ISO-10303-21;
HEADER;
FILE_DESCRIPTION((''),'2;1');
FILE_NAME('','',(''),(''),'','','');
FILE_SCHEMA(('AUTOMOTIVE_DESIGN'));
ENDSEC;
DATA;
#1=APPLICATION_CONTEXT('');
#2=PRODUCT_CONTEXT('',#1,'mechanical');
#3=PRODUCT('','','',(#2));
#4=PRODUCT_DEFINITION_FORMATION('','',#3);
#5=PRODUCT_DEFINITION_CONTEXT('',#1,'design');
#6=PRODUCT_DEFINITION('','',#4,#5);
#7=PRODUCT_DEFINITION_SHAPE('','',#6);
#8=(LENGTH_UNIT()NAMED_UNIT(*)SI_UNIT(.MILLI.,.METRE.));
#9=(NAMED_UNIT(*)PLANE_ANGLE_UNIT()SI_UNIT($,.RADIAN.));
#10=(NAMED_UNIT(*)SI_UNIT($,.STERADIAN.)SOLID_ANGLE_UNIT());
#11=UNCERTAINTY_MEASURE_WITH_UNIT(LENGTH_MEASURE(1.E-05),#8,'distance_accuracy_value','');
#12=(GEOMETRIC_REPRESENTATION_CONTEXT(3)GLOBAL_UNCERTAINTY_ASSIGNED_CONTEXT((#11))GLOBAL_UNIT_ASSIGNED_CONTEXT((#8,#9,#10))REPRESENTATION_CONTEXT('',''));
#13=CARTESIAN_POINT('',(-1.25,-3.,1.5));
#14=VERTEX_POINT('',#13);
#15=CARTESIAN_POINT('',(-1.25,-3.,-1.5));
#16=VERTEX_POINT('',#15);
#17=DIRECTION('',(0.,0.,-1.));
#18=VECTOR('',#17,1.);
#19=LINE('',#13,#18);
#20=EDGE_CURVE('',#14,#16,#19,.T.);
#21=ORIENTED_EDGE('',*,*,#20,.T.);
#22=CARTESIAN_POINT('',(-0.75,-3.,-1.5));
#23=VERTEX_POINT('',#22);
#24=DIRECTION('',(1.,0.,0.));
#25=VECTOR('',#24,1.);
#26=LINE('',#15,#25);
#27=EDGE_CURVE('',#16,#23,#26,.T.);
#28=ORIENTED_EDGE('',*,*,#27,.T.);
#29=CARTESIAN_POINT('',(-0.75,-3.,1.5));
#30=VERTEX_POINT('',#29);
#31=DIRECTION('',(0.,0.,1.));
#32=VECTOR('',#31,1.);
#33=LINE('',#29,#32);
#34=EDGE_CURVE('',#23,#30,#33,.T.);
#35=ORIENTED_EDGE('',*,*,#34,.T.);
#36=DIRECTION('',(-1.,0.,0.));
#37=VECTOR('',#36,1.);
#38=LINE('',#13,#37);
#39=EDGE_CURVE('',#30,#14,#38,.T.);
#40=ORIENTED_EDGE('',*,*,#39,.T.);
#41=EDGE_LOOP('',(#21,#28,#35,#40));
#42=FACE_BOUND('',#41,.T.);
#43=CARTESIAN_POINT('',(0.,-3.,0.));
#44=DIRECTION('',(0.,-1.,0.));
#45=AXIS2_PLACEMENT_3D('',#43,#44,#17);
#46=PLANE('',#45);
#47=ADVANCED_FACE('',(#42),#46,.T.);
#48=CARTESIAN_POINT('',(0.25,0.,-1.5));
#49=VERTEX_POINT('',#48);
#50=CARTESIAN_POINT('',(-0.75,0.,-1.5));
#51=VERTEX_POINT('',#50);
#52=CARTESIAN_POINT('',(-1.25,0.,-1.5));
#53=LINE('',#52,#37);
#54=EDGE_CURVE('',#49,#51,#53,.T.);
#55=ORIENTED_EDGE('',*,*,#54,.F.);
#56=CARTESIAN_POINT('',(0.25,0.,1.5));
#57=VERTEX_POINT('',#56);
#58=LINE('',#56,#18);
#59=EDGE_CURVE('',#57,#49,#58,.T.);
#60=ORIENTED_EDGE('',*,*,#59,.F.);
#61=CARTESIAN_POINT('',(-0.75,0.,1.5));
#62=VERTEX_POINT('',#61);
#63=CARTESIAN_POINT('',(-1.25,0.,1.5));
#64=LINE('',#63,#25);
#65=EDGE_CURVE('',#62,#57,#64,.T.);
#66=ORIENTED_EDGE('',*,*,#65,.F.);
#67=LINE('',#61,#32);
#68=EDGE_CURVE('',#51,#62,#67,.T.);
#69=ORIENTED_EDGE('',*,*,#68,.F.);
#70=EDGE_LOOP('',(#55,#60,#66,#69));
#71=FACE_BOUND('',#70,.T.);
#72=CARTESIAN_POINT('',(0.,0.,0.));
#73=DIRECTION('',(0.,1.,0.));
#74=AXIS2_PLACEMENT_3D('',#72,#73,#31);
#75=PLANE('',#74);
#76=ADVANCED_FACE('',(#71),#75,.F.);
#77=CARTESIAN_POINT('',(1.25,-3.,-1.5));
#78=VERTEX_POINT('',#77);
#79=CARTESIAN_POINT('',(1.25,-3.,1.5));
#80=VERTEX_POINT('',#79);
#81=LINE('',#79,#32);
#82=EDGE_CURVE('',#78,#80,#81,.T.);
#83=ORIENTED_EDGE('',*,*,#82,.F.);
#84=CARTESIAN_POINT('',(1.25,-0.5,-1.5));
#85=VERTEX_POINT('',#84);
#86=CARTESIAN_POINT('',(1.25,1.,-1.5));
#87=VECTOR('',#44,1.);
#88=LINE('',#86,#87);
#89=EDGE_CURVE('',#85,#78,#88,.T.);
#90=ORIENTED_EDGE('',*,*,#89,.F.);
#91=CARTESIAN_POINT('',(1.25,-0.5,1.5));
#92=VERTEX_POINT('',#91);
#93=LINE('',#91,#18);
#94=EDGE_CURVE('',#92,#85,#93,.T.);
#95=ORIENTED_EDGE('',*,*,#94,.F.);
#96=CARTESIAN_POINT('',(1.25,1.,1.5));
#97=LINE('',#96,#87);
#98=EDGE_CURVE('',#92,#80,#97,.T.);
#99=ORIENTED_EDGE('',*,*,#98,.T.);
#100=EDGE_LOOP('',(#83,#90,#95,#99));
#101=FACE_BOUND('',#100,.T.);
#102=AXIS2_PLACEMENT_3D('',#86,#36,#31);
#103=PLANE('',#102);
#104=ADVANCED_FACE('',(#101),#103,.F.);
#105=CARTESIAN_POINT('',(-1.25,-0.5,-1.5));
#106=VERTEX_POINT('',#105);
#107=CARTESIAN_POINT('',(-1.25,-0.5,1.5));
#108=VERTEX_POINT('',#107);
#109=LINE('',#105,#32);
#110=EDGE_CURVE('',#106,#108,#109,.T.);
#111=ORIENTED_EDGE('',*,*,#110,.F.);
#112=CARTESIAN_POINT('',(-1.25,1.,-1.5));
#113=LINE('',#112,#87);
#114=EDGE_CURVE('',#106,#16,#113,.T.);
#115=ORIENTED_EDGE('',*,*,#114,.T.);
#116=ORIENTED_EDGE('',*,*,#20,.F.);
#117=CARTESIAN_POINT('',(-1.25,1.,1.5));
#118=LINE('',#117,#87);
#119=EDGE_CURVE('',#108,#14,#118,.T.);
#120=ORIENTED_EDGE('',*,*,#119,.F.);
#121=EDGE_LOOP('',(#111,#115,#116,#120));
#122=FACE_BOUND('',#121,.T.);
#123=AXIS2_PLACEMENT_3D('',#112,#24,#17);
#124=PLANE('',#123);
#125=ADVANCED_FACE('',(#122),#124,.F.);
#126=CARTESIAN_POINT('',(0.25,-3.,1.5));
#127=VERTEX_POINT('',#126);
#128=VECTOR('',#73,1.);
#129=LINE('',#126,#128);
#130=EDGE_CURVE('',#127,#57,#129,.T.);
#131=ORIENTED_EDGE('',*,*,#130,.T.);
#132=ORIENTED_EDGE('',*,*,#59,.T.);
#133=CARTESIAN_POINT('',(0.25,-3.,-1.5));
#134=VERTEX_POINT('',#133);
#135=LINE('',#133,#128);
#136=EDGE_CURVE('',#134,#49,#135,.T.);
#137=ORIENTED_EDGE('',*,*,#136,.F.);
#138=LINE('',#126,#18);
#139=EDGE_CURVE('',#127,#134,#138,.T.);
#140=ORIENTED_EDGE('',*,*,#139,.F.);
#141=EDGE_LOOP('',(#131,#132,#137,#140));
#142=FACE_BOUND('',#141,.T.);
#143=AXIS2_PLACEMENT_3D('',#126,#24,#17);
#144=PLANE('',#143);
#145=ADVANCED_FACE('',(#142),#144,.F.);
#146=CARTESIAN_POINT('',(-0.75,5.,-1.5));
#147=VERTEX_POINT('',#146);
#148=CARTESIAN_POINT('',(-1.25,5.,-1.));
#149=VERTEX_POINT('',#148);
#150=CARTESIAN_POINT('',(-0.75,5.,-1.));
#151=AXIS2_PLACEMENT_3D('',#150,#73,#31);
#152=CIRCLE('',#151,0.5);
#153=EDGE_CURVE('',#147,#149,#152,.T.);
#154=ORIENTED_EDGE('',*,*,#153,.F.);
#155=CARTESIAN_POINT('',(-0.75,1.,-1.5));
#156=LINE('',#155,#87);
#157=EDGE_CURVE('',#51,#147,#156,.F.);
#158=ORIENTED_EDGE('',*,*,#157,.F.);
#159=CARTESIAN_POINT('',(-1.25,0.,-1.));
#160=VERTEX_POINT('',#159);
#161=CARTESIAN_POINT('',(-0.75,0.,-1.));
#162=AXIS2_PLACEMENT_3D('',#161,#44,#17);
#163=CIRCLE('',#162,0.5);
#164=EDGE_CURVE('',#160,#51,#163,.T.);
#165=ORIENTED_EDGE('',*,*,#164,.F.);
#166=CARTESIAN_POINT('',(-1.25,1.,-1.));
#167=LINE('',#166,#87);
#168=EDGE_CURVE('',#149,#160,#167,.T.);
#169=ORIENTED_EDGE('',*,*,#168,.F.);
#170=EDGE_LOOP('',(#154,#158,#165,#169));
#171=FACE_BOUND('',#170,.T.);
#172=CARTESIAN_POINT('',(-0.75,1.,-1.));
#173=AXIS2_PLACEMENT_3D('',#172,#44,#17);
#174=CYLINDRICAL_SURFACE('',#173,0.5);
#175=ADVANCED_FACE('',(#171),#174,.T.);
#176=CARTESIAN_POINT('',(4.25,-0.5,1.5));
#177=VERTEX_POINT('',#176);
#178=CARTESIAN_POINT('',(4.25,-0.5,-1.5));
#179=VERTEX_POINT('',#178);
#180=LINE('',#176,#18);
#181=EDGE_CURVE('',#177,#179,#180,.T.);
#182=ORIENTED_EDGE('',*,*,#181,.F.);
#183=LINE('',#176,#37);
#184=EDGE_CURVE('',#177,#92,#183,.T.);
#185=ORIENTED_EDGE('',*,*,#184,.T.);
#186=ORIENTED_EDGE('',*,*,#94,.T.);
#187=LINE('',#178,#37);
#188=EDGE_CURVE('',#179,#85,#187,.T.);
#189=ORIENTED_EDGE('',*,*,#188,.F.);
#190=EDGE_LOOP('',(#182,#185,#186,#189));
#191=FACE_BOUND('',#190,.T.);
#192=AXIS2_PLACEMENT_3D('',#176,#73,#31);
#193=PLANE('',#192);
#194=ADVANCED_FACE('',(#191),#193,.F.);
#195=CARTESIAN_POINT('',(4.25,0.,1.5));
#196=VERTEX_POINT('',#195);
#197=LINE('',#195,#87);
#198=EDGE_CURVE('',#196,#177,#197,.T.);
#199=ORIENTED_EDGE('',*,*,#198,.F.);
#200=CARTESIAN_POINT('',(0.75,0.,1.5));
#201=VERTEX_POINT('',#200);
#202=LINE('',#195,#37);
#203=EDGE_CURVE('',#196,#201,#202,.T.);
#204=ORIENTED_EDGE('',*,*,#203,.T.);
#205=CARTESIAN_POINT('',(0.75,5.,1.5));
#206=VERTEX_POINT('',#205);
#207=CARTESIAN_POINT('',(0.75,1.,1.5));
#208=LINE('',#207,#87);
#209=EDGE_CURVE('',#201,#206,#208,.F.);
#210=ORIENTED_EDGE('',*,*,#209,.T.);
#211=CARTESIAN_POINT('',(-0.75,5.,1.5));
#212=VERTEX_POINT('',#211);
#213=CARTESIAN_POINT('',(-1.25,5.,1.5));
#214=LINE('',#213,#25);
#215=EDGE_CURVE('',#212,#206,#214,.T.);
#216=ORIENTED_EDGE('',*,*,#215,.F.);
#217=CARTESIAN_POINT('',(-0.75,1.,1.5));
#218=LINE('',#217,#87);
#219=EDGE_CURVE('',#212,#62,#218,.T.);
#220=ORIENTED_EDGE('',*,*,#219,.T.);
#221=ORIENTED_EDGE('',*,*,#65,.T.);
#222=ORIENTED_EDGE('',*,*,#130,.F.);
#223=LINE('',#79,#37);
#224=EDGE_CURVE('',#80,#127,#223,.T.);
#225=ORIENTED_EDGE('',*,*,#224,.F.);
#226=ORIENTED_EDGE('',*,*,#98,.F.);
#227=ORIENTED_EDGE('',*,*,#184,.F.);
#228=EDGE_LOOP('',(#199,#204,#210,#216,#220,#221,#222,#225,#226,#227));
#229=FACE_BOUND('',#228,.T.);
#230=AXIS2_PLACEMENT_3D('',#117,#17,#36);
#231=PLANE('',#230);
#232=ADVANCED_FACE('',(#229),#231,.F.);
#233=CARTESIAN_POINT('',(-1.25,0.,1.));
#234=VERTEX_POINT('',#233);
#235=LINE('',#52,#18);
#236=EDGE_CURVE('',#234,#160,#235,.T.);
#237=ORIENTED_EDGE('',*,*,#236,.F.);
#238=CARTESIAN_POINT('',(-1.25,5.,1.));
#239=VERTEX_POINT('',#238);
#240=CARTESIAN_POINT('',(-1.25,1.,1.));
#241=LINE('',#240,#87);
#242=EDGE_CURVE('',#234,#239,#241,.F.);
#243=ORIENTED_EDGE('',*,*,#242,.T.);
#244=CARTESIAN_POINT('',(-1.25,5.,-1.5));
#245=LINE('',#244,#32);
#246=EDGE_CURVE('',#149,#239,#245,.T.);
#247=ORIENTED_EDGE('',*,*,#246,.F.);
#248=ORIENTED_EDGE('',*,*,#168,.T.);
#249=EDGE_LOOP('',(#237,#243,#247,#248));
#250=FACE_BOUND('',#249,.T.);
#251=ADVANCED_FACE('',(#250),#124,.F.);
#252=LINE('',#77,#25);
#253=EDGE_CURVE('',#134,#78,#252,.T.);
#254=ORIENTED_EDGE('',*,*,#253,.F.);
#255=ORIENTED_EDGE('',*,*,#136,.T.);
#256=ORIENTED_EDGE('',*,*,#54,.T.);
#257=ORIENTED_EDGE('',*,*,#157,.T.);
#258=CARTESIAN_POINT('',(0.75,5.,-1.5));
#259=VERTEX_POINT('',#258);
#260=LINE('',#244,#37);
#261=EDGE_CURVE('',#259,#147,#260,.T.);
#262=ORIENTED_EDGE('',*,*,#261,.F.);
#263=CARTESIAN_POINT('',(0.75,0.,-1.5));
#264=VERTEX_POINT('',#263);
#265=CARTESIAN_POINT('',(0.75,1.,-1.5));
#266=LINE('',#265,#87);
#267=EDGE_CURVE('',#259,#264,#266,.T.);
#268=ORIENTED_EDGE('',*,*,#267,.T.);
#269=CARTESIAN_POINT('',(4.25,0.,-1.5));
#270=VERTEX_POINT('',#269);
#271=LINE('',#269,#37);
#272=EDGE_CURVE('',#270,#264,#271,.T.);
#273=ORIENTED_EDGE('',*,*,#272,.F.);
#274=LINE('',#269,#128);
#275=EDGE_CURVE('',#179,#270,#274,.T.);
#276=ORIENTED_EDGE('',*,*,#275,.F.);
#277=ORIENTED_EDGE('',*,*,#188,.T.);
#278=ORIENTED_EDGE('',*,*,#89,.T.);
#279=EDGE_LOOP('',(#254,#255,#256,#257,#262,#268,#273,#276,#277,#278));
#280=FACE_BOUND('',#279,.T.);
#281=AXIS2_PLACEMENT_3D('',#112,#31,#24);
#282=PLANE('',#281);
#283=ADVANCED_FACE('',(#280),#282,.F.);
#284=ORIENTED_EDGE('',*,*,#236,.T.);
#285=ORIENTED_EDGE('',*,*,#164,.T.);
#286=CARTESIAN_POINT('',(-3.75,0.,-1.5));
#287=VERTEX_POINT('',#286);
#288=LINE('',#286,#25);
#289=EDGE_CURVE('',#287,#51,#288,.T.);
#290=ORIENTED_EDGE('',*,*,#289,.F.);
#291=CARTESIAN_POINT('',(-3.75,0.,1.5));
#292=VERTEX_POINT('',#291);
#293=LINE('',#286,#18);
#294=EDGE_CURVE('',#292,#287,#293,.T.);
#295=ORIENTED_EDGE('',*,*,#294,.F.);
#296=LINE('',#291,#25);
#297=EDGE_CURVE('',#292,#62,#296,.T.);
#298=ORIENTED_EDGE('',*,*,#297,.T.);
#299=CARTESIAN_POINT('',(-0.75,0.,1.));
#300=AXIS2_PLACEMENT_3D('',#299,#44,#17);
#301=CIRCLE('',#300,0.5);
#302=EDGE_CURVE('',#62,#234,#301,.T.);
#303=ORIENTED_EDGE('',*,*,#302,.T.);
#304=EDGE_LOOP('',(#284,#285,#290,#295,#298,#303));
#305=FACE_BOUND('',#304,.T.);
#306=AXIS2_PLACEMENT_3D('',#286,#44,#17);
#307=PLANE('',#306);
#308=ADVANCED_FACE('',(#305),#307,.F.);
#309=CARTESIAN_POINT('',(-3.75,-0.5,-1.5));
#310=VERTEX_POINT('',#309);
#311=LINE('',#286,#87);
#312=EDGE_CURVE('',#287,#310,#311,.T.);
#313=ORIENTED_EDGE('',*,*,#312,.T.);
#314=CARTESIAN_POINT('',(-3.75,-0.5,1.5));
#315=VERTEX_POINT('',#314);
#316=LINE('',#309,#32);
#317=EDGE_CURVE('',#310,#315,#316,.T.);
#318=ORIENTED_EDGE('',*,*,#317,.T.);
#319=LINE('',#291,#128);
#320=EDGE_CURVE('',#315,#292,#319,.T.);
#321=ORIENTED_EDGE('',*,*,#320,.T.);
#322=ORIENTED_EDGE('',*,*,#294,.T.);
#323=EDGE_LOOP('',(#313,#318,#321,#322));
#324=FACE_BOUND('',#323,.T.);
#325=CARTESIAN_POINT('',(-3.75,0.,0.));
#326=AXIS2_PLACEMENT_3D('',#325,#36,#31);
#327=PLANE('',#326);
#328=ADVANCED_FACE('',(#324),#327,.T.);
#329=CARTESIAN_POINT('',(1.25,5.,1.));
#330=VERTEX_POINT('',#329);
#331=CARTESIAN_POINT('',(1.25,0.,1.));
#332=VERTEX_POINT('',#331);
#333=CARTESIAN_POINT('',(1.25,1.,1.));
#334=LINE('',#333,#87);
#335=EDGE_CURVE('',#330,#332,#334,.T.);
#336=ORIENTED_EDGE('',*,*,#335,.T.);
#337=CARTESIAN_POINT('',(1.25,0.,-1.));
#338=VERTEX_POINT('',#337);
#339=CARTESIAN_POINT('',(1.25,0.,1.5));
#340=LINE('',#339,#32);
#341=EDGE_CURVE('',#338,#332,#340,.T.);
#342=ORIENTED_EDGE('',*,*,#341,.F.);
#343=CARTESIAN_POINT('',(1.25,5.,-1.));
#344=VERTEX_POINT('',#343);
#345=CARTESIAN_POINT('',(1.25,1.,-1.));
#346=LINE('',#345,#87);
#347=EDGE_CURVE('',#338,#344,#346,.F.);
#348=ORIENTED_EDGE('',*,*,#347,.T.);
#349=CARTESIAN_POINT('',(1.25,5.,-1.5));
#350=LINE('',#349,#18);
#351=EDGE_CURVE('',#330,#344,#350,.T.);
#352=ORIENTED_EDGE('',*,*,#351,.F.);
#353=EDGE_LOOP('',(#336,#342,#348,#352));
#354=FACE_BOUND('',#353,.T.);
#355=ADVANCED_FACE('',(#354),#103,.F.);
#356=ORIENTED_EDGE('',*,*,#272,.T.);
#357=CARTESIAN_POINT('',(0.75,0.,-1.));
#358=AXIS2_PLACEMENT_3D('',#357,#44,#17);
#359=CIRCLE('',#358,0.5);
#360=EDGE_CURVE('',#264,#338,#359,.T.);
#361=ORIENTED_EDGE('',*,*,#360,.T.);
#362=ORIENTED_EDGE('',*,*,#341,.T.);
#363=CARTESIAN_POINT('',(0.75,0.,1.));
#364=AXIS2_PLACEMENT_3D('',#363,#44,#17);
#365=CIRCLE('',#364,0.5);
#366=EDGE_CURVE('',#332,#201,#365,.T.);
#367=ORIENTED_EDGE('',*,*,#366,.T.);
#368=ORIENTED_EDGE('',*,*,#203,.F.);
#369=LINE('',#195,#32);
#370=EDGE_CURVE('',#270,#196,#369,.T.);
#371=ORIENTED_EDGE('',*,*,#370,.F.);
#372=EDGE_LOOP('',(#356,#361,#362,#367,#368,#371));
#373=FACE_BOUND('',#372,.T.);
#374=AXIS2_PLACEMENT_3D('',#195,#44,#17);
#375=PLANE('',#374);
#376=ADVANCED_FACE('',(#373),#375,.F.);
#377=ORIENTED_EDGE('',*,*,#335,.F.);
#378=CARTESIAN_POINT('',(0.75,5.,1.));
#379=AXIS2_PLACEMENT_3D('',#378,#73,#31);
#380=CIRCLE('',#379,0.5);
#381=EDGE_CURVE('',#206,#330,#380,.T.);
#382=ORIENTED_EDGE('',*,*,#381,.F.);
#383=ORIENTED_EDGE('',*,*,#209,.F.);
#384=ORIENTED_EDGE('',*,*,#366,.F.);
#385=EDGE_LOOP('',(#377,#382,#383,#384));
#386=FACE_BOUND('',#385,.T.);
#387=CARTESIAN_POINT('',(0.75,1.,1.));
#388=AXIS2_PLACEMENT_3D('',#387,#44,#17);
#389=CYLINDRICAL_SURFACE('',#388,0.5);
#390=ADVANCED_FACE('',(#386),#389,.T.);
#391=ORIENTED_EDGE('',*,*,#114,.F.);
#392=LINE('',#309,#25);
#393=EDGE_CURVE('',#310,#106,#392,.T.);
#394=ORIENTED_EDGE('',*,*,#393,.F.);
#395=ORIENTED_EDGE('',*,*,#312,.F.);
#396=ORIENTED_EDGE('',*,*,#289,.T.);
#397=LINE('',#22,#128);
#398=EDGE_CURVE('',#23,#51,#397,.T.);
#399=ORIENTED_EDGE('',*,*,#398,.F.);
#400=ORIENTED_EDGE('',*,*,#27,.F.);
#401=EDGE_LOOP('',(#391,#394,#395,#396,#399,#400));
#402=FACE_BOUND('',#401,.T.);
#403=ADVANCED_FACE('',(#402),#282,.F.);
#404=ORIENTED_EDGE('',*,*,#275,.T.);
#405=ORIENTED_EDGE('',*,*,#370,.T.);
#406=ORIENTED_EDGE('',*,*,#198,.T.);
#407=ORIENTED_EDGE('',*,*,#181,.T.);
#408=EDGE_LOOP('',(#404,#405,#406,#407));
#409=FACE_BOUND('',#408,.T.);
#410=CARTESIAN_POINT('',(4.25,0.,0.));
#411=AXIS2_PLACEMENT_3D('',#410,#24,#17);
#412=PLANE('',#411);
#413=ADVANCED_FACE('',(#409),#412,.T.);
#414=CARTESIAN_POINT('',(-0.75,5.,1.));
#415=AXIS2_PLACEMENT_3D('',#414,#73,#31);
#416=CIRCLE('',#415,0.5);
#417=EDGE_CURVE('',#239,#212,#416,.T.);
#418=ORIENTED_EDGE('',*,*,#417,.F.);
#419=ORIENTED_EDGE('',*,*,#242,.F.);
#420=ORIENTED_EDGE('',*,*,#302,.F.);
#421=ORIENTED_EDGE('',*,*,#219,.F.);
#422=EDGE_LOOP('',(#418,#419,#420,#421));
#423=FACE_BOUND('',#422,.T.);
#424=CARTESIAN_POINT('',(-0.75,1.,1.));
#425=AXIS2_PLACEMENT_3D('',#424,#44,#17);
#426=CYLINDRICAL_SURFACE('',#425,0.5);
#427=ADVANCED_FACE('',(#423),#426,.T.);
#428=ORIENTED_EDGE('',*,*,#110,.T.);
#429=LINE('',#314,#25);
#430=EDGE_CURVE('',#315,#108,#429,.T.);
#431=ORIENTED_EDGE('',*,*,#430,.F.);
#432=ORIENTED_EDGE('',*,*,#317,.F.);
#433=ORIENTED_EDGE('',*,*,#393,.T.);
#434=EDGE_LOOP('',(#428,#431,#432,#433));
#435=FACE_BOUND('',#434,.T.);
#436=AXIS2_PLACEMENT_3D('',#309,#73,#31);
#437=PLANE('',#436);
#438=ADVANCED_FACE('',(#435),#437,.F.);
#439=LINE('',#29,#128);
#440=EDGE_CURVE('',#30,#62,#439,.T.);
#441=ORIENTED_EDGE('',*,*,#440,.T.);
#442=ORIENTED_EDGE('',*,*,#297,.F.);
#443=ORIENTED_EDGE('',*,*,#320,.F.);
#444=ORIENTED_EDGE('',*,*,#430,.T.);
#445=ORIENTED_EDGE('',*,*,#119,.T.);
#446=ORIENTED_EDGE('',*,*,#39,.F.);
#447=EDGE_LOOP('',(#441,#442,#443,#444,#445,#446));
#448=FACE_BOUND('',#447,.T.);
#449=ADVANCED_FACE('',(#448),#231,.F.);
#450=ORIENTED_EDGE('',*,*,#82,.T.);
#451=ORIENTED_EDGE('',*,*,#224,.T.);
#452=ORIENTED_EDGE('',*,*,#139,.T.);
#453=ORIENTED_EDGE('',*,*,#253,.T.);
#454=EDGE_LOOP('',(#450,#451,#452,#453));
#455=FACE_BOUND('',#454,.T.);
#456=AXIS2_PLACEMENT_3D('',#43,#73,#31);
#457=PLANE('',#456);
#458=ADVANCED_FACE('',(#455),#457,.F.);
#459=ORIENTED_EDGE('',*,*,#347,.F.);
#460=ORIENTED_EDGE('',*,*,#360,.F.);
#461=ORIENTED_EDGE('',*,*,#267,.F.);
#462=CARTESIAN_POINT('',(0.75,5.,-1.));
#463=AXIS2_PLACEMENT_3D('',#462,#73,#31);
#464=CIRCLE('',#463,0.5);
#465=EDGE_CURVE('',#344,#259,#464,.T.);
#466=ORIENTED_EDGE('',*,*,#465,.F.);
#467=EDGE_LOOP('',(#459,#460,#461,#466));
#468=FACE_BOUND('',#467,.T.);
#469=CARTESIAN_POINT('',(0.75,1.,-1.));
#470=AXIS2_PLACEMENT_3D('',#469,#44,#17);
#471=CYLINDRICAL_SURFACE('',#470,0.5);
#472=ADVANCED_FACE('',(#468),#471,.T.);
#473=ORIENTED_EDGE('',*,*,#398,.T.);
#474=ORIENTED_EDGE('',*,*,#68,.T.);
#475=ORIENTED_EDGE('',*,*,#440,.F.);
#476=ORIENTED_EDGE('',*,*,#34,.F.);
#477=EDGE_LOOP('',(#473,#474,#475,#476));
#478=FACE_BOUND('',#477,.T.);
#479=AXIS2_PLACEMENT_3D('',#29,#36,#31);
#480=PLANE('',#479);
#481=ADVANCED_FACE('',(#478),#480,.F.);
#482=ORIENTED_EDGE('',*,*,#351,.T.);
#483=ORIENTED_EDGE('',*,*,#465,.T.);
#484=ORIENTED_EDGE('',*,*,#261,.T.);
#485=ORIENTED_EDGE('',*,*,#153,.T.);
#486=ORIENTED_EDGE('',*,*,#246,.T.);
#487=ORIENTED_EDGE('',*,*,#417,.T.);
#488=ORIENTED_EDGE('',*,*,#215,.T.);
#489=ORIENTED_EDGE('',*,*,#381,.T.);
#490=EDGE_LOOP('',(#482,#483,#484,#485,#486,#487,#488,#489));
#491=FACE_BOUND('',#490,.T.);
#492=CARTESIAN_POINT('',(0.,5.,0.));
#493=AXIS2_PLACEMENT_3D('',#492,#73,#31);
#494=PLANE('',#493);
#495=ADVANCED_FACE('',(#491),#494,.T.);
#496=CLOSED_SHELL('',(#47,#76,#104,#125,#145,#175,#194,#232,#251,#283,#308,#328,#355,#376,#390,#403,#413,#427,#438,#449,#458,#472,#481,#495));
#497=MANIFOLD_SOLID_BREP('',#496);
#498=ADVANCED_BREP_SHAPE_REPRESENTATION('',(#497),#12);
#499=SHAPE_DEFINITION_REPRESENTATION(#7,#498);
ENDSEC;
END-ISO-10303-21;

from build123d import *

# Parameters (mm, degrees)
SKETCH1_W           = 2.5
SKETCH1_H           = 3
BOSS_EXTRUDE1_DEPTH = 1
SKETCH2_W           = 1
SKETCH2_H           = 3
BOSS_EXTRUDE2_DEPTH = 3
SKETCH3_W           = 0.5
SKETCH3_H           = 3
BOSS_EXTRUDE3_DEPTH = 3
SKETCH4_W           = 3
SKETCH4_H           = 0.5
BOSS_EXTRUDE4_DEPTH = 3
SKETCH5_W           = 3
SKETCH5_H           = 0.5
BOSS_EXTRUDE5_DEPTH = 2.5
SKETCH8_W           = 2.5
SKETCH8_H           = 3
BOSS_EXTRUDE6_DEPTH = 4
FILLET1_R           = 0.5


with BuildPart() as part:
    # Sketch1 → Boss-Extrude1 (new body)
    with BuildSketch(Plane(origin=(0, 0, 0), x_dir=(1, 0, 0), z_dir=(0, 1, 0))):
        Rectangle(SKETCH1_W, SKETCH1_H)
    extrude(amount=BOSS_EXTRUDE1_DEPTH)

    # Sketch2 → Boss-Extrude2 (add)
    with BuildSketch(Plane.XZ):
        with Locations((0.75, 0)):
            Rectangle(SKETCH2_W, SKETCH2_H)
    extrude(amount=BOSS_EXTRUDE2_DEPTH)

    # Sketch3 → Boss-Extrude3 (add)
    with BuildSketch(Plane.XZ):
        with Locations((-1, 0)):
            Rectangle(SKETCH3_W, SKETCH3_H)
    extrude(amount=BOSS_EXTRUDE3_DEPTH)

    # Sketch4 → Boss-Extrude4 (add)
    with BuildSketch(Plane(origin=(1.25, 0, 0), x_dir=(0, 0, -1), z_dir=(1, 0, 0))):
        with Locations((0, -0.25)):
            Rectangle(SKETCH4_W, SKETCH4_H)
    extrude(amount=BOSS_EXTRUDE4_DEPTH)

    # Sketch5 → Boss-Extrude5 (add)
    with BuildSketch(Plane.ZY.offset(1.25)):
        with Locations((0, -0.25)):
            Rectangle(SKETCH5_W, SKETCH5_H)
    extrude(amount=BOSS_EXTRUDE5_DEPTH)

    # Sketch8 → Boss-Extrude6 (add)
    with BuildSketch(Plane(origin=(0, 1, 0), x_dir=(1, 0, 0), z_dir=(0, 1, 0))):
        Rectangle(SKETCH8_W, SKETCH8_H)
    extrude(amount=BOSS_EXTRUDE6_DEPTH)

    # Fillet1
    fillet1_edges = [part.edges().sort_by_distance(p)[0] for p in [
        (1.25, 2.5, 1.5),
        (-1.25, 2.5, 1.5),
        (-1.25, 2.5, -1.5),
        (1.25, 2.5, -1.5),
    ]]
    fillet(fillet1_edges, radius=FILLET1_R - 0.0001)  # a hair under: the kernel refuses the full size


solid = part.part
